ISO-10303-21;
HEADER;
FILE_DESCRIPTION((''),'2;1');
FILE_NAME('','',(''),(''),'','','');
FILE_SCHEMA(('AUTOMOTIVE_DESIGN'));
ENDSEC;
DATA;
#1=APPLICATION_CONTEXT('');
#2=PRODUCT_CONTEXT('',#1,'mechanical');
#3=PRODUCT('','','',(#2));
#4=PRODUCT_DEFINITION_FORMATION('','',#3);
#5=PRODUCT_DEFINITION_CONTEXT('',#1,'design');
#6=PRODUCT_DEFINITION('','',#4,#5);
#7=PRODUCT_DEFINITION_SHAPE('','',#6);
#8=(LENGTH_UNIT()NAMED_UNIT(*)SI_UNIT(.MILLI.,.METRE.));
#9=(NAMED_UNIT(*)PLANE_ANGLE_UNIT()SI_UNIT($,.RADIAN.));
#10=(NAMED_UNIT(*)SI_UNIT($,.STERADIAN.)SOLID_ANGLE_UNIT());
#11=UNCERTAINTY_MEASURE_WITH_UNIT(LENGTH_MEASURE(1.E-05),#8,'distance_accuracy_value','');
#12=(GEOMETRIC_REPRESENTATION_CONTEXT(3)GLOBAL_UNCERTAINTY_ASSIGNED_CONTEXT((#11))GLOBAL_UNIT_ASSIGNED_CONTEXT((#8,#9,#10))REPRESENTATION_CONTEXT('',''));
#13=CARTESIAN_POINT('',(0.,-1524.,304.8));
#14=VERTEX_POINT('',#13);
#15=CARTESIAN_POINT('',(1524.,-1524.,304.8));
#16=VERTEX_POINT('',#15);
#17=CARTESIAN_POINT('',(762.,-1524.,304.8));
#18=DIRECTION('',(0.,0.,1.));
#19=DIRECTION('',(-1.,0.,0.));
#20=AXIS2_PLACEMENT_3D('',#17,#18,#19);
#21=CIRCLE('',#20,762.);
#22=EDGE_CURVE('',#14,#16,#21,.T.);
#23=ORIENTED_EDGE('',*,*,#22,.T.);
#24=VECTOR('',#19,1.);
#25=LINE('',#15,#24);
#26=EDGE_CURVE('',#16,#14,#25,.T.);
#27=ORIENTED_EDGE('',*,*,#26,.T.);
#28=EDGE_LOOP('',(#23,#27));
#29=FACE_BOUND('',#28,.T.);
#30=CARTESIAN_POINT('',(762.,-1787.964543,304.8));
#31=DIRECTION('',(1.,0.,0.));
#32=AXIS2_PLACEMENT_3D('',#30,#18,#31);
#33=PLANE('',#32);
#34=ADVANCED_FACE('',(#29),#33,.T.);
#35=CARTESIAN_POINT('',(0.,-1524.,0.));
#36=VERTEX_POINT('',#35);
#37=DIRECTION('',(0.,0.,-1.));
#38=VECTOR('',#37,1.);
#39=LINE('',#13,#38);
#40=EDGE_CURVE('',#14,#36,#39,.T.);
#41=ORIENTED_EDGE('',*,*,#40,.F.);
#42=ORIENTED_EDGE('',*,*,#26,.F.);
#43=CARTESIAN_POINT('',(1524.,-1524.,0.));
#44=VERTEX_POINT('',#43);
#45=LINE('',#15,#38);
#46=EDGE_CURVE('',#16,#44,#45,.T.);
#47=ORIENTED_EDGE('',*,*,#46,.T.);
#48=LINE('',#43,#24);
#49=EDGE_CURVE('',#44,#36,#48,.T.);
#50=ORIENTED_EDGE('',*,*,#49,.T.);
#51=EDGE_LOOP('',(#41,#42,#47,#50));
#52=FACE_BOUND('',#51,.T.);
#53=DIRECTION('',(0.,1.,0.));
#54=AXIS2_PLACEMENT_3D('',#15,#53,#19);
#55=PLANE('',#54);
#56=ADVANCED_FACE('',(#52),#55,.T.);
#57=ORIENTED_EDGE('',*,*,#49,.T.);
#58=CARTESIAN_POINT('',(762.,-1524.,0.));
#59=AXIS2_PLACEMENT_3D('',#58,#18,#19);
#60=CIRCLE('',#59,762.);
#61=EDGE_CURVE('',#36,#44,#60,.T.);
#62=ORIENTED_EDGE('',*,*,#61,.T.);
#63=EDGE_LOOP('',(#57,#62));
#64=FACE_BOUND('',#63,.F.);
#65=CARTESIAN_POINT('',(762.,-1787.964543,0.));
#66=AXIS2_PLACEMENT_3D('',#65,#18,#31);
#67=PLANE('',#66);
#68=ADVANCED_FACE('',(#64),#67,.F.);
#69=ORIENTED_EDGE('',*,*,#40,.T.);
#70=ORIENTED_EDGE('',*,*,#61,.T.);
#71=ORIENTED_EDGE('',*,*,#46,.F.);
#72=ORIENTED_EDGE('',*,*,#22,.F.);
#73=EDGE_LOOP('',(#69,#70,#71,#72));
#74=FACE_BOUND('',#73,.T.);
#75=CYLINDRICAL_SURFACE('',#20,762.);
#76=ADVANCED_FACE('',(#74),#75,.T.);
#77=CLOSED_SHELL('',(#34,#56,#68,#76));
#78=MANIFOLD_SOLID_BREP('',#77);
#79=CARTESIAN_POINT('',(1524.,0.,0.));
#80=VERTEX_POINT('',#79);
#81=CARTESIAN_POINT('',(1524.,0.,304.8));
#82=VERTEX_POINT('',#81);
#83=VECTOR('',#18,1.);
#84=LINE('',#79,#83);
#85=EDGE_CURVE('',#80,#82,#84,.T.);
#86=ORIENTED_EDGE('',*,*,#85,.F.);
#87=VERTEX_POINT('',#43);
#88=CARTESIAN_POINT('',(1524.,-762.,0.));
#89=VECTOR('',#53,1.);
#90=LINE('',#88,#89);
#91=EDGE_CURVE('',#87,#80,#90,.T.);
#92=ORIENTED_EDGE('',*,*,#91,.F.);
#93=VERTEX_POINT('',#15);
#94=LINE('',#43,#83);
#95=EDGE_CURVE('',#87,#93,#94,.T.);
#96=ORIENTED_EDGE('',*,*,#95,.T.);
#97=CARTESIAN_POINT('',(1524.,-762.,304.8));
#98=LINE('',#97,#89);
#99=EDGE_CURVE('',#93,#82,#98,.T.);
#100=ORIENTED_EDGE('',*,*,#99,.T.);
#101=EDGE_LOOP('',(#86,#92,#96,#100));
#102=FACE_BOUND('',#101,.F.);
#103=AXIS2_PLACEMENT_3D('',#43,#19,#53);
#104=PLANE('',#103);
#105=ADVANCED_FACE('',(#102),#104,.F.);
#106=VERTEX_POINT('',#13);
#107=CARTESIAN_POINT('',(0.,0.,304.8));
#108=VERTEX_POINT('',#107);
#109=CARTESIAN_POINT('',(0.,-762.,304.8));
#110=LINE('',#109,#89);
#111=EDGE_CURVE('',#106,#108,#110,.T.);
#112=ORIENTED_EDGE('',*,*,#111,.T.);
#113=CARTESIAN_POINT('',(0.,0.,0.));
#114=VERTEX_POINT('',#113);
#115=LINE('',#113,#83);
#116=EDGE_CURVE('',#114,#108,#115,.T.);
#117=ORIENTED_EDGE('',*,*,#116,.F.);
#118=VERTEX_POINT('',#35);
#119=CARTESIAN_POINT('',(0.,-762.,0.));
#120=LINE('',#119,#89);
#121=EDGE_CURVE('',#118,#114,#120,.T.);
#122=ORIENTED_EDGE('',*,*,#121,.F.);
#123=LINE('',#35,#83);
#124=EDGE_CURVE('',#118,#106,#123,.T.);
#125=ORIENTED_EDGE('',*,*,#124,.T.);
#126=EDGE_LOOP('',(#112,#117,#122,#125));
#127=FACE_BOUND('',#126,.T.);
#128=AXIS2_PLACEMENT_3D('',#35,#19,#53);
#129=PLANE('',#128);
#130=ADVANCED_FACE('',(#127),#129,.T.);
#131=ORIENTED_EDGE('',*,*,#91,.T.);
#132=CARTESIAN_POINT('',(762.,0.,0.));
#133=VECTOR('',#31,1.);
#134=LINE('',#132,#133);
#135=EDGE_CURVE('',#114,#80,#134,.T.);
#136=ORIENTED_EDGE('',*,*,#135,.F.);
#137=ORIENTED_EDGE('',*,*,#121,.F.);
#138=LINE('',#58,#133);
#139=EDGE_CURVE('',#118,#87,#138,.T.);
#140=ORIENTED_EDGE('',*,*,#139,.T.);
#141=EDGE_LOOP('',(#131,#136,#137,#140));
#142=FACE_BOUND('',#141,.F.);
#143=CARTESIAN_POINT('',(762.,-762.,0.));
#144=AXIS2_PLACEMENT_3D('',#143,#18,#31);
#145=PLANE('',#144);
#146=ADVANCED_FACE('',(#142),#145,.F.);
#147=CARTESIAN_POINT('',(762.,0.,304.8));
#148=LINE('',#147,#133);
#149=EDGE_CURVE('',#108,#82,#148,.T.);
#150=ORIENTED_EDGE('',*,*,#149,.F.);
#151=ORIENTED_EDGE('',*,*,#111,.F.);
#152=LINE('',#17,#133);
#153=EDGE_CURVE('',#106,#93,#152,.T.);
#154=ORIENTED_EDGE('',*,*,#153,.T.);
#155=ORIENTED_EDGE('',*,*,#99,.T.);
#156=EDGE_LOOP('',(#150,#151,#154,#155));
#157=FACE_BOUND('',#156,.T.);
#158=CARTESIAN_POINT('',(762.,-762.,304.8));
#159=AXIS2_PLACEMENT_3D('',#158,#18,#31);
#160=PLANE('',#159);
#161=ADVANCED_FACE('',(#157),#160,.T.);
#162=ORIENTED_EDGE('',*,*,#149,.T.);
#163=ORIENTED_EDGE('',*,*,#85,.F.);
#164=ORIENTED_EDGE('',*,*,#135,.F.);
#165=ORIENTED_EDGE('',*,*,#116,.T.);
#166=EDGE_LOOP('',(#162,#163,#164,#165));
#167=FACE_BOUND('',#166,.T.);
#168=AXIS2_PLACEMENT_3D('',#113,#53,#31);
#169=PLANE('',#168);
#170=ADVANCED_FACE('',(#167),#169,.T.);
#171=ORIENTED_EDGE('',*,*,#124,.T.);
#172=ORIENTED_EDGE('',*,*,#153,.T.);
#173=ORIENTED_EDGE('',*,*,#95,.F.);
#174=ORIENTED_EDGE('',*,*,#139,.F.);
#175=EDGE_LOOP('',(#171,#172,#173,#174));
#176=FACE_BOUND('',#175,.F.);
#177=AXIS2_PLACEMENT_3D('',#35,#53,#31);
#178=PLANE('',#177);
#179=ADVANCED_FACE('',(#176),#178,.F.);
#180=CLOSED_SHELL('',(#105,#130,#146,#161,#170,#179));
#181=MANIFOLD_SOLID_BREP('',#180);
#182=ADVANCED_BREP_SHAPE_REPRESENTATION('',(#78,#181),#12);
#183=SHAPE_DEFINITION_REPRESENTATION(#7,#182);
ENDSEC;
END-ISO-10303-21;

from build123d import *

# Parameters (mm, degrees)
F0_W     = 1524
F0_H     = 1524
F1_DEPTH = 304.8
F3_DEPTH = 304.8


# Not quite as in the source:
# - a feature of the source that left no trace in its solid (it failed there, or was rolled back) is left out


with BuildPart() as f1:
    # F0 (on Top) → F1 (new body)
    with BuildSketch(Plane.XY):
        with Locations((762, -762)):
            Rectangle(F0_W, F0_H)
    extrude(amount=F1_DEPTH)


with BuildPart() as f3:
    # F2 (on face) → F3 (new body)
    with BuildSketch(Plane.XY.offset(304.8)):
        with BuildLine():
            ThreePointArc((0, -1524), (762, -2286), (1524, -1524))
            Line((1524, -1524), (0, -1524))
        make_face()
    extrude(amount=-F3_DEPTH)


solid = Compound([f1.part, f3.part])
